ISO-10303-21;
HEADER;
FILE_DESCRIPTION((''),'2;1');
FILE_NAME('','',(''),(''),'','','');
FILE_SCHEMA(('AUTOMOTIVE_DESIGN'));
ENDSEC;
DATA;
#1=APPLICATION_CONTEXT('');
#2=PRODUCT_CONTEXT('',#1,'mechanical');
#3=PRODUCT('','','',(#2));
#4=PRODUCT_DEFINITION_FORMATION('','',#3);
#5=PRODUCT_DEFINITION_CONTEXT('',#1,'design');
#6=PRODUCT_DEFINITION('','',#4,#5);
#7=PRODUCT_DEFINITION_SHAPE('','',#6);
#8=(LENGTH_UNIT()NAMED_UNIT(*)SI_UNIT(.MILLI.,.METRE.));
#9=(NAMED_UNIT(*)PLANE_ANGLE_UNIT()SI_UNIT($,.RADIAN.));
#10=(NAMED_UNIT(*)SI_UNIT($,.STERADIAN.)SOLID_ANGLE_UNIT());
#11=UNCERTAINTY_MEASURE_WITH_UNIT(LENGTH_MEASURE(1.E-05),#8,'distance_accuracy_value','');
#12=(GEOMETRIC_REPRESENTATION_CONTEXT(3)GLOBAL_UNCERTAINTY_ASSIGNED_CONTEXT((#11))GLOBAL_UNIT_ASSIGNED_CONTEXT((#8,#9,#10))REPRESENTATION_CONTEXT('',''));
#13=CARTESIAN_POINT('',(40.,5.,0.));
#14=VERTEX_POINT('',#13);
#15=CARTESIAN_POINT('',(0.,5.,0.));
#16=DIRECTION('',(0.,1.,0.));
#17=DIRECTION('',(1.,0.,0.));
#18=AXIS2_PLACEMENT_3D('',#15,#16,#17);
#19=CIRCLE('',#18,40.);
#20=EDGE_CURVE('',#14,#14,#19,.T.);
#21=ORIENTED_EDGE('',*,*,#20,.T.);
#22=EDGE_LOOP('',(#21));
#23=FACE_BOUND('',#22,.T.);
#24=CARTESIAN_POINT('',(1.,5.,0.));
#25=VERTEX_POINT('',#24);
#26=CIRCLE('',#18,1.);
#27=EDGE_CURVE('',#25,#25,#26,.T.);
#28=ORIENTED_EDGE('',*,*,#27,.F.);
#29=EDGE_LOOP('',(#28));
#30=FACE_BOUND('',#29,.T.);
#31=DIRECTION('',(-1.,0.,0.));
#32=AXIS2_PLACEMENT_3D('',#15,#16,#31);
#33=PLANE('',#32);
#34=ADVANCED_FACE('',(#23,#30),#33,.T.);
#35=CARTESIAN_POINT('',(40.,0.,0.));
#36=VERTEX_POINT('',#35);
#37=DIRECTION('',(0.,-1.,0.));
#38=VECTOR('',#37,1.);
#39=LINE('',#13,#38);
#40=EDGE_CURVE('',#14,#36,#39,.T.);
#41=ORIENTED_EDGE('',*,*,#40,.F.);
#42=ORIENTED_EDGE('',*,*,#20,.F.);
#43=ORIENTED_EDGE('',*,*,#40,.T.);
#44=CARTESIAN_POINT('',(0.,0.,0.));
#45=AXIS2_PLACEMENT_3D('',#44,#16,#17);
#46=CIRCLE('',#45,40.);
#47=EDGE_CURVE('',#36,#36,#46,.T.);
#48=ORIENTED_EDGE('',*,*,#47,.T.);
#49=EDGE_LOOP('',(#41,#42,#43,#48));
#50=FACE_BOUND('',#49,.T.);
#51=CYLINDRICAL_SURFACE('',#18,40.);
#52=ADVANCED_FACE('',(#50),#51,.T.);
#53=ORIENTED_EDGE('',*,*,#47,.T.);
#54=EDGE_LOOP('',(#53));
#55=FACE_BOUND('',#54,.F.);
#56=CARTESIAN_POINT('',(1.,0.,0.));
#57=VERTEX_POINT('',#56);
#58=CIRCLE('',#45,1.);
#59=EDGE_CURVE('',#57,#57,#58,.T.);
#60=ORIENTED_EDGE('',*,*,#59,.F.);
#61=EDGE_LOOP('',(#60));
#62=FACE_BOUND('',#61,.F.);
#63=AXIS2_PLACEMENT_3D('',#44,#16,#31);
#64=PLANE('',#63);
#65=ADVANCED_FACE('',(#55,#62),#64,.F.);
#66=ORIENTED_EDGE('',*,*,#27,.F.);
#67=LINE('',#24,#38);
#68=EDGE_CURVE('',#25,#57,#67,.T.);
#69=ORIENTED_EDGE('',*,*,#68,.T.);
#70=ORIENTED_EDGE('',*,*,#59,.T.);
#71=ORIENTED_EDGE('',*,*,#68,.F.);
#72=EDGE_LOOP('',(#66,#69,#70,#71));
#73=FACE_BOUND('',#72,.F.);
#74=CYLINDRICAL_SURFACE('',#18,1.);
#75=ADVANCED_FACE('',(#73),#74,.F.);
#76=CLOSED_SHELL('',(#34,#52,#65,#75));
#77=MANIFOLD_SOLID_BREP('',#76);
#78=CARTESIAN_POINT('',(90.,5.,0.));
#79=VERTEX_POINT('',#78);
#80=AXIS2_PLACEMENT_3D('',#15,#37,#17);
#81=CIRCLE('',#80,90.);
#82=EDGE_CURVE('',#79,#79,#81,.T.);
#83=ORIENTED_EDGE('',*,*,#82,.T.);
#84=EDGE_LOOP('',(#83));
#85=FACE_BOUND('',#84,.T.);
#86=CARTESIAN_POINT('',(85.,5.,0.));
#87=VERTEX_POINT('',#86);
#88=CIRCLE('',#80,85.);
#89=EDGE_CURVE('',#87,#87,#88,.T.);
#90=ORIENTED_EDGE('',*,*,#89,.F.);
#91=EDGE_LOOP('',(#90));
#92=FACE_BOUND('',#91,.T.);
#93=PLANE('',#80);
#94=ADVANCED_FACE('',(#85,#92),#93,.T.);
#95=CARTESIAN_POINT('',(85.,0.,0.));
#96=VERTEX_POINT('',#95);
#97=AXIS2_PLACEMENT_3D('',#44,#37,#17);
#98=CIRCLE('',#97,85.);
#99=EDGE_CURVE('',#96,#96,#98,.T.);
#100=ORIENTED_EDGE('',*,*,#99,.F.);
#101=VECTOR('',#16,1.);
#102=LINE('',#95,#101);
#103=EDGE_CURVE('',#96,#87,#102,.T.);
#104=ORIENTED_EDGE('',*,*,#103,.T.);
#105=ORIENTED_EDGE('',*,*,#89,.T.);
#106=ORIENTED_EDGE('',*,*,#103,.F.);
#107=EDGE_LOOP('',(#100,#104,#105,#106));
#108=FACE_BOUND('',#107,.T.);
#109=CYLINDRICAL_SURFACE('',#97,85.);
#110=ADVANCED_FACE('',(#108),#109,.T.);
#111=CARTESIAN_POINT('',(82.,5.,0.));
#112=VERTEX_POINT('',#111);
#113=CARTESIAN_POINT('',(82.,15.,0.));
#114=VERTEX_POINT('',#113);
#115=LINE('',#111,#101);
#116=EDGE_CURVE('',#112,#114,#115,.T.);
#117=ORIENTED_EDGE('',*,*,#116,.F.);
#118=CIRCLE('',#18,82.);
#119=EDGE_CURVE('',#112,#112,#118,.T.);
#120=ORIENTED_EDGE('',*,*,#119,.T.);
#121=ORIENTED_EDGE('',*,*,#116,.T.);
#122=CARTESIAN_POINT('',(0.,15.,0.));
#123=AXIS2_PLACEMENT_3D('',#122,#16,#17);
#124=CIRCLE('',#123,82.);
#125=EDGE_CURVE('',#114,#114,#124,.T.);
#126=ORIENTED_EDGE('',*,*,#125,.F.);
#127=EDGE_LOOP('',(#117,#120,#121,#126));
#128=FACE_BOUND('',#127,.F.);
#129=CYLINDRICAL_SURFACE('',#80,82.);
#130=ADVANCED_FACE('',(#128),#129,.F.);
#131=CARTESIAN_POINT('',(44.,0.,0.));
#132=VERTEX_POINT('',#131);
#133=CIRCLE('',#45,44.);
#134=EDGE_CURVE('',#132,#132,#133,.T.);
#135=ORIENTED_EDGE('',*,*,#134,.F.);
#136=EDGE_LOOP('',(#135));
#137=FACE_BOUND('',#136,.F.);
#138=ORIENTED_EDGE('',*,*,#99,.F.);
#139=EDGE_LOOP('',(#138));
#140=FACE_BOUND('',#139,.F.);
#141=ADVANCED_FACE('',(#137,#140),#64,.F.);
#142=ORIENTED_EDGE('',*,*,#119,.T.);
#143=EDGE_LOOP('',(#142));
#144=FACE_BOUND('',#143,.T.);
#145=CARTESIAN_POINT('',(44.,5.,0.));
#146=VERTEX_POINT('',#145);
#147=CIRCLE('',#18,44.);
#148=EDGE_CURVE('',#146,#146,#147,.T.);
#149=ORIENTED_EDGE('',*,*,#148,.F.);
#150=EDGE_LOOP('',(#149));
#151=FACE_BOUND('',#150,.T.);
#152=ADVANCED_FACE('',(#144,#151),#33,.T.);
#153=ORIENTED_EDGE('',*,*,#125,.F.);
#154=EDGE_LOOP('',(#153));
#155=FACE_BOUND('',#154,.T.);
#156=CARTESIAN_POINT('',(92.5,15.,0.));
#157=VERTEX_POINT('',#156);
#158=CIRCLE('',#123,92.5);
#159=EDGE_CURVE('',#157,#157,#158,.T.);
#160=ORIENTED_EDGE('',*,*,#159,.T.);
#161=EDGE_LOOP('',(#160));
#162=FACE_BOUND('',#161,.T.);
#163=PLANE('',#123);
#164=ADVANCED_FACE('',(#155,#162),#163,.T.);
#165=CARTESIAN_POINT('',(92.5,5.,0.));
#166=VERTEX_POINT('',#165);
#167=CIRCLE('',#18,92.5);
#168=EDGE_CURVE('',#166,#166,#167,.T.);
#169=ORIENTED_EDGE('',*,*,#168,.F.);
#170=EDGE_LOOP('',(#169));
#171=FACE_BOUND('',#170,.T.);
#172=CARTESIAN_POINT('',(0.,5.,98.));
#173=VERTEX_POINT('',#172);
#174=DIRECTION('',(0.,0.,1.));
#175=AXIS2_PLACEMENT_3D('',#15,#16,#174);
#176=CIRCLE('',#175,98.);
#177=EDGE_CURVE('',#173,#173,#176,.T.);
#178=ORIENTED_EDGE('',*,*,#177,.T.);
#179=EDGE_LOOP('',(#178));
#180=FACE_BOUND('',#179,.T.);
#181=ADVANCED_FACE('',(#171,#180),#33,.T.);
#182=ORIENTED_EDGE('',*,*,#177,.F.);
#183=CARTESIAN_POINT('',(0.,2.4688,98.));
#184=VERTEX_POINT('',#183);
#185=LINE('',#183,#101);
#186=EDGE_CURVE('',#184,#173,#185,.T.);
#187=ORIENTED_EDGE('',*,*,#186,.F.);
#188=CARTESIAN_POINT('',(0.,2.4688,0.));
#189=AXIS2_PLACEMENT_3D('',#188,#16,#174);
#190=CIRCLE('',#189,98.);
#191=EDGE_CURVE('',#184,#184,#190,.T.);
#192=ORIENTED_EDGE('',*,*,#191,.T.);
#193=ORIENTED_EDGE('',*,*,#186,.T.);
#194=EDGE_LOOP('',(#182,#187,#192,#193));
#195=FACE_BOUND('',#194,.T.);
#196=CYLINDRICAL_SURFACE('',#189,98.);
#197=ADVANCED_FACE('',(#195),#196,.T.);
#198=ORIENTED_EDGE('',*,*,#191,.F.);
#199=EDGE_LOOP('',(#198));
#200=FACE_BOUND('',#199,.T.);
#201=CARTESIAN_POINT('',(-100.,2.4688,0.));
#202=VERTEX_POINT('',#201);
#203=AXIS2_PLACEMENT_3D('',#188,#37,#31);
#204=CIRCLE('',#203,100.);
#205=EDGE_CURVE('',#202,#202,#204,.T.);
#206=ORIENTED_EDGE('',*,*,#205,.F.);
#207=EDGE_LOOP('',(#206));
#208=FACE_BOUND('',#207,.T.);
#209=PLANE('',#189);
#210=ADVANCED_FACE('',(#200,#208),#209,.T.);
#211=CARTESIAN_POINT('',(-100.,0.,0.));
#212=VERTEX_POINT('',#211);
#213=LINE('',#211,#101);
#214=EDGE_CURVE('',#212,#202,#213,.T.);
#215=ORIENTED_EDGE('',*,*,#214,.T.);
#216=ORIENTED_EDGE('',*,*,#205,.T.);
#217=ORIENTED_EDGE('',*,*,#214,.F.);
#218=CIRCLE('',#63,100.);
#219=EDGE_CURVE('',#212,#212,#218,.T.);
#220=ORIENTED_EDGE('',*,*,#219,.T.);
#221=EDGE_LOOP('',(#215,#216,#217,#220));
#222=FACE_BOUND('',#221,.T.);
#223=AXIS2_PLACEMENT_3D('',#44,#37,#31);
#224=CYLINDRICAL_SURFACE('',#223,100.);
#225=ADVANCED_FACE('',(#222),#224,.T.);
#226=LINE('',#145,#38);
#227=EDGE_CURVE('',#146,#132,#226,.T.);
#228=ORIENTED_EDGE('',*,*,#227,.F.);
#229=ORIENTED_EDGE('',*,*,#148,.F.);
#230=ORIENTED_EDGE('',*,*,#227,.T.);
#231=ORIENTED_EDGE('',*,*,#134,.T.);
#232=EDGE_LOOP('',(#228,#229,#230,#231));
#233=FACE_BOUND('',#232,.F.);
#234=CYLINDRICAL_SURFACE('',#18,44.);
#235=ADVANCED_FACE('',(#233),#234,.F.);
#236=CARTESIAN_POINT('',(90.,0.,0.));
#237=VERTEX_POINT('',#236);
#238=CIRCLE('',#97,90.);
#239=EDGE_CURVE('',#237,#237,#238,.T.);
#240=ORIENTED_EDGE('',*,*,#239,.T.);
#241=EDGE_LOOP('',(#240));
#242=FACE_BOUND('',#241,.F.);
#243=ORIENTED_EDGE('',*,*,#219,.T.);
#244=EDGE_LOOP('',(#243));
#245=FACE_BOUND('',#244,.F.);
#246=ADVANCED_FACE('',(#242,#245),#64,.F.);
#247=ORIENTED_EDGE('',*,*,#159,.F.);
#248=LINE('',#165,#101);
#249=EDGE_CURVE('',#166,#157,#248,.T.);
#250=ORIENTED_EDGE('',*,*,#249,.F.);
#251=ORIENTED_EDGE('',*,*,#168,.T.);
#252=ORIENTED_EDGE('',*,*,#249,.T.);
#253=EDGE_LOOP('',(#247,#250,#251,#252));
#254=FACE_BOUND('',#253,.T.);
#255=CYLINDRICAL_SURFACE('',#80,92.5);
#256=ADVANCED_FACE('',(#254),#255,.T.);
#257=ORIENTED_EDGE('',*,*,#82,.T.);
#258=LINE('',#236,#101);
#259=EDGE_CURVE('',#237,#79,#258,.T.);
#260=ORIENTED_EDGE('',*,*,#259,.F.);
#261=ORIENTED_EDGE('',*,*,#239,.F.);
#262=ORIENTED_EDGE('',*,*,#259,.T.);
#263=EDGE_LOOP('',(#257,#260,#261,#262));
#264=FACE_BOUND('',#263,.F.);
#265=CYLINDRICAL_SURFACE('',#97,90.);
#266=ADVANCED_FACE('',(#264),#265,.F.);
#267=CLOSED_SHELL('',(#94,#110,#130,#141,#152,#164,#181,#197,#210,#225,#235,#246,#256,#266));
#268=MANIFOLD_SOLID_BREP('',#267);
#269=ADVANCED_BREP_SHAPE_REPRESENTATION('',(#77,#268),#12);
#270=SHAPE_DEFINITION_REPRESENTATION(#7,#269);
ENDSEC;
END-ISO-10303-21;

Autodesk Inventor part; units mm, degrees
ref_plane "YZ Plane" through (0, 0, 0) normal (1, 0, 0) x (0, 1, 0)
ref_plane "XZ Plane" through (0, 0, 0) normal (0, 1, 0) x (-1, 0, 0)
ref_plane "XY Plane" through (0, 0, 0) normal (0, 0, 1) x (1, 0, 0)
sketch "Sketch1" plane through (0, 0, 0) normal (0, 1, 0) x (-1, 0, 0)
  circle A0 centre (0, 0) radius 100
  dimension "d0" = 200
extrude "Extrusion1" add sketch "Sketch1" along normal blind 5
sketch "Sketch8" plane through (0, 5, 0) normal (0, 1, 0) x (1, 0, 0)
  circle A0 centre (0, 0) radius 1
  circle A1 centre (42, 0) radius 1
  circle A2 centre (-21, 36.3731) radius 1
  circle A3 centre (-21, -36.3731) radius 1
  circle A4 centre (0, 0) radius 44
  circle A5 centre (0, 0) radius 40
  point P0 (-20.5, -35.507)
  point P1 (-20.5, 35.507)
  point P2 (-21.5, 37.2391)
  point P3 (-21.5, -37.2391)
  point P4 (41, 0)
  point P5 (43, 0)
  dimension "d17" = 2
  dimension "d18" = 2
  dimension "d19" = 42
  dimension "d22" = 360
  dimension "d46" = 88
  dimension "d47" = 80
sketch "Sketch9" plane through (0, 5, 0) normal (0, 1, 0) x (1, 0, 0)
  line L0 (80.8862, 2.8807) -> (72.2256, 0)
  line L1 (72.2256, 0) -> (80.8409, -3.9526)
  line L2 (80.3024, 10.1197) -> (71.9349, 6.4743)
  line L3 (71.9349, 6.4743) -> (80.8698, 3.3098)
  line L4 (79.072, 17.2772) -> (71.0649, 12.8964)
  line L5 (71.0649, 12.8964) -> (80.2475, 10.5456)
  line L6 (77.2049, 24.2956) -> (69.6228, 19.2147)
  line L7 (69.6228, 19.2147) -> (78.9792, 17.6965)
  line L8 (74.7163, 31.1184) -> (67.6202, 25.3783)
  line L9 (67.6202, 25.3783) -> (77.0749, 24.7049)
  line L10 (71.6261, 37.6906) -> (65.0731, 31.3375)
  line L11 (65.0731, 31.3375) -> (74.5501, 31.5144)
  line L12 (67.9592, 43.9594) -> (62.002, 37.0445)
  line L13 (62.002, 37.0445) -> (71.4251, 38.0702)
  line L14 (63.7451, 49.8742) -> (58.4318, 42.4532)
  line L15 (58.4318, 42.4532) -> (67.725, 44.3194)
  line L16 (59.0178, 55.3875) -> (54.3911, 47.52)
  line L17 (54.3911, 47.52) -> (63.4796, 50.2118)
  line L18 (53.8153, 60.4549) -> (49.9124, 52.2043)
  line L19 (49.9124, 52.2043) -> (58.7231, 55.6999)
  line L20 (48.1795, 65.0355) -> (45.032, 56.4683)
  line L21 (45.032, 56.4683) -> (53.4938, 60.7396)
  line L22 (42.1558, 69.0924) -> (39.7889, 60.2776)
  line L23 (39.7889, 60.2776) -> (47.8338, 65.2902)
  line L24 (35.7927, 72.5931) -> (34.2255, 63.6016)
  line L25 (34.2255, 63.6016) -> (41.7886, 69.3151)
  line L26 (29.1415, 75.5093) -> (28.3865, 66.4135)
  line L27 (28.3865, 66.4135) -> (35.407, 72.782)
  line L28 (22.2555, 77.8175) -> (22.319, 68.6907)
  line L29 (22.319, 68.6907) -> (28.7404, 75.6629)
  line L30 (15.1904, 79.4992) -> (16.0717, 70.4148)
  line L31 (16.0717, 70.4148) -> (21.8423, 77.9345)
  line L32 (8.003, 80.5409) -> (9.6951, 71.572)
  line L33 (9.6951, 71.572) -> (14.7684, 79.5787)
  line L34 (0.7512, 80.934) -> (3.2404, 72.1529)
  line L35 (3.2404, 72.1529) -> (7.5755, 80.5822)
  line L36 (-6.5067, 80.6755) -> (-3.2404, 72.1529)
  line L37 (-3.2404, 72.1529) -> (0.3217, 80.9369)
  line L38 (-13.7122, 79.7675) -> (-9.6951, 71.572)
  line L39 (-9.6951, 71.572) -> (-6.9347, 80.6399)
  line L40 (-20.8073, 78.2172) -> (-16.0717, 70.4148)
  line L41 (-16.0717, 70.4148) -> (-14.1353, 79.6936)
  line L42 (-27.7349, 76.0372) -> (-22.319, 68.6907)
  line L43 (-22.319, 68.6907) -> (-21.2221, 78.1057)
  line L44 (-34.4392, 73.245) -> (-28.3865, 66.4135)
  line L45 (-28.3865, 66.4135) -> (-28.138, 75.8889)
  line L46 (-40.8661, 69.863) -> (-34.2255, 63.6016)
  line L47 (-34.2255, 63.6016) -> (-34.8273, 73.0612)
  line L48 (-46.9641, 65.9185) -> (-39.7889, 60.2776)
  line L49 (-39.7889, 60.2776) -> (-41.2363, 69.6452)
  line L50 (-52.6839, 61.4433) -> (-45.032, 56.4683)
  line L51 (-45.032, 56.4683) -> (-47.3132, 65.6684)
  line L52 (-57.9796, 56.4734) -> (-49.9124, 52.2043)
  line L53 (-49.9124, 52.2043) -> (-53.0092, 61.1629)
  line L54 (-62.8084, 51.0488) -> (-54.3911, 47.52)
  line L55 (-54.3911, 47.52) -> (-58.2784, 56.165)
  line L56 (-67.1315, 45.2132) -> (-58.4318, 42.4532)
  line L57 (-58.4318, 42.4532) -> (-63.0784, 50.7148)
  line L58 (-70.9142, 39.0136) -> (-62.002, 37.0445)
  line L59 (-62.002, 37.0445) -> (-67.3705, 44.8564)
  line L60 (-74.1258, 32.4998) -> (-65.0731, 31.3375)
  line L61 (-65.0731, 31.3375) -> (-71.1202, 38.6367)
  line L62 (-76.7407, 25.7244) -> (-67.6202, 25.3783)
  line L63 (-67.6202, 25.3783) -> (-74.2973, 32.106)
  line L64 (-78.7377, 18.7419) -> (-69.6228, 19.2147)
  line L65 (-69.6228, 19.2147) -> (-76.8761, 25.3168)
  line L66 (-80.1007, 11.6084) -> (-71.0649, 12.8964)
  line L67 (-71.0649, 12.8964) -> (-78.836, 18.3238)
  line L68 (-80.8188, 4.3815) -> (-71.9349, 6.4743)
  line L69 (-71.9349, 6.4743) -> (-80.1612, 11.1832)
  line L70 (-80.8862, -2.8807) -> (-72.2256, 0)
  line L71 (-72.2256, 0) -> (-80.8409, 3.9526)
  line L72 (-80.3024, -10.1197) -> (-71.9349, -6.4743)
  line L73 (-71.9349, -6.4743) -> (-80.8698, -3.3098)
  line L74 (-79.072, -17.2772) -> (-71.0649, -12.8964)
  line L75 (-71.0649, -12.8964) -> (-80.2475, -10.5456)
  line L76 (-77.2049, -24.2956) -> (-69.6228, -19.2147)
  line L77 (-69.6228, -19.2147) -> (-78.9792, -17.6965)
  line L78 (-74.7163, -31.1184) -> (-67.6202, -25.3783)
  line L79 (-67.6202, -25.3783) -> (-77.0749, -24.7049)
  line L80 (-71.6261, -37.6906) -> (-65.0731, -31.3375)
  line L81 (-65.0731, -31.3375) -> (-74.5501, -31.5144)
  line L82 (-67.9592, -43.9594) -> (-62.002, -37.0445)
  line L83 (-62.002, -37.0445) -> (-71.4251, -38.0702)
  line L84 (-63.7451, -49.8742) -> (-58.4318, -42.4532)
  line L85 (-58.4318, -42.4532) -> (-67.725, -44.3194)
  line L86 (-59.0178, -55.3875) -> (-54.3911, -47.52)
  line L87 (-54.3911, -47.52) -> (-63.4796, -50.2118)
  line L88 (-53.8153, -60.4549) -> (-49.9124, -52.2043)
  line L89 (-49.9124, -52.2043) -> (-58.7231, -55.6999)
  line L90 (-48.1795, -65.0355) -> (-45.032, -56.4683)
  line L91 (-45.032, -56.4683) -> (-53.4938, -60.7396)
  line L92 (-42.1558, -69.0924) -> (-39.7889, -60.2776)
  line L93 (-39.7889, -60.2776) -> (-47.8338, -65.2902)
  line L94 (-35.7927, -72.5931) -> (-34.2255, -63.6016)
  line L95 (-34.2255, -63.6016) -> (-41.7886, -69.3151)
  line L96 (-29.1415, -75.5093) -> (-28.3865, -66.4135)
  line L97 (-28.3865, -66.4135) -> (-35.407, -72.782)
  line L98 (-22.2555, -77.8175) -> (-22.319, -68.6907)
  line L99 (-22.319, -68.6907) -> (-28.7404, -75.6629)
  line L100 (-15.1904, -79.4992) -> (-16.0717, -70.4148)
  line L101 (-16.0717, -70.4148) -> (-21.8423, -77.9345)
  line L102 (-8.003, -80.5409) -> (-9.6951, -71.572)
  line L103 (-9.6951, -71.572) -> (-14.7684, -79.5787)
  line L104 (-0.7512, -80.934) -> (-3.2404, -72.1529)
  line L105 (-3.2404, -72.1529) -> (-7.5755, -80.5822)
  line L106 (6.5067, -80.6755) -> (3.2404, -72.1529)
  line L107 (3.2404, -72.1529) -> (-0.3217, -80.9369)
  line L108 (13.7122, -79.7675) -> (9.6951, -71.572)
  line L109 (9.6951, -71.572) -> (6.9347, -80.6399)
  line L110 (20.8073, -78.2172) -> (16.0717, -70.4148)
  line L111 (16.0717, -70.4148) -> (14.1353, -79.6936)
  line L112 (27.7349, -76.0372) -> (22.319, -68.6907)
  line L113 (22.319, -68.6907) -> (21.2221, -78.1057)
  line L114 (34.4392, -73.245) -> (28.3865, -66.4135)
  line L115 (28.3865, -66.4135) -> (28.138, -75.8889)
  line L116 (40.8661, -69.863) -> (34.2255, -63.6016)
  line L117 (34.2255, -63.6016) -> (34.8273, -73.0612)
  line L118 (46.9641, -65.9185) -> (39.7889, -60.2776)
  line L119 (39.7889, -60.2776) -> (41.2363, -69.6452)
  line L120 (52.6839, -61.4433) -> (45.032, -56.4683)
  line L121 (45.032, -56.4683) -> (47.3132, -65.6684)
  line L122 (57.9796, -56.4734) -> (49.9124, -52.2043)
  line L123 (49.9124, -52.2043) -> (53.0092, -61.1629)
  line L124 (62.8084, -51.0488) -> (54.3911, -47.52)
  line L125 (54.3911, -47.52) -> (58.2784, -56.165)
  line L126 (67.1315, -45.2132) -> (58.4318, -42.4532)
  line L127 (58.4318, -42.4532) -> (63.0784, -50.7148)
  line L128 (70.9142, -39.0136) -> (62.002, -37.0445)
  line L129 (62.002, -37.0445) -> (67.3705, -44.8564)
  line L130 (74.1258, -32.4998) -> (65.0731, -31.3375)
  line L131 (65.0731, -31.3375) -> (71.1202, -38.6367)
  line L132 (76.7407, -25.7244) -> (67.6202, -25.3783)
  line L133 (67.6202, -25.3783) -> (74.2973, -32.106)
  line L134 (78.7377, -18.7419) -> (69.6228, -19.2147)
  line L135 (69.6228, -19.2147) -> (76.8761, -25.3168)
  line L136 (80.1007, -11.6084) -> (71.0649, -12.8964)
  line L137 (71.0649, -12.8964) -> (78.836, -18.3238)
  line L138 (80.8188, -4.3815) -> (71.9349, -6.4743)
  line L139 (71.9349, -6.4743) -> (80.1612, -11.1832)
  circle A0 centre (0, 0) radius 92.5
  arc A1 (-20.8073, 78.2172) -> (-21.2221, 78.1057) centre (0, 0) ccw
  arc A2 (-27.7349, 76.0372) -> (-28.138, 75.8889) centre (0, 0) ccw
  arc A3 (-34.4392, 73.245) -> (-34.8273, 73.0612) centre (0, 0) ccw
  arc A4 (-40.8661, 69.863) -> (-41.2363, 69.6452) centre (0, 0) ccw
  arc A5 (-67.9592, -43.9594) -> (-67.725, -44.3194) centre (0, 0) ccw
  arc A6 (-48.1795, -65.0355) -> (-47.8338, -65.2902) centre (0, 0) ccw
  arc A7 (-42.1558, -69.0924) -> (-41.7886, -69.3151) centre (0, 0) ccw
  arc A8 (-35.7927, -72.5931) -> (-35.407, -72.782) centre (0, 0) ccw
  arc A9 (-29.1415, -75.5093) -> (-28.7404, -75.6629) centre (0, 0) ccw
  arc A10 (-22.2555, -77.8175) -> (-21.8423, -77.9345) centre (0, 0) ccw
  arc A11 (-15.1904, -79.4992) -> (-14.7684, -79.5787) centre (0, 0) ccw
  arc A12 (-8.003, -80.5409) -> (-7.5755, -80.5822) centre (0, 0) ccw
  arc A13 (-0.7512, -80.934) -> (-0.3217, -80.9369) centre (0, 0) ccw
  arc A14 (6.5067, -80.6755) -> (6.9347, -80.6399) centre (0, 0) ccw
  arc A15 (13.7122, -79.7675) -> (14.1353, -79.6936) centre (0, 0) ccw
  arc A16 (20.8073, -78.2172) -> (21.2221, -78.1057) centre (0, 0) ccw
  arc A17 (27.7349, -76.0372) -> (28.138, -75.8889) centre (0, 0) ccw
  arc A18 (34.4392, -73.245) -> (34.8273, -73.0612) centre (0, 0) ccw
  arc A19 (40.8661, -69.863) -> (41.2363, -69.6452) centre (0, 0) ccw
  arc A20 (46.9641, -65.9185) -> (47.3132, -65.6684) centre (0, 0) ccw
  arc A21 (57.9796, -56.4734) -> (58.2784, -56.165) centre (0, 0) ccw
  arc A22 (62.8084, -51.0488) -> (63.0784, -50.7148) centre (0, 0) ccw
  arc A23 (67.1315, -45.2132) -> (67.3705, -44.8564) centre (0, 0) ccw
  arc A24 (70.9142, -39.0136) -> (71.1202, -38.6367) centre (0, 0) ccw
  arc A25 (74.1258, -32.4998) -> (74.2973, -32.106) centre (0, 0) ccw
  arc A26 (76.7407, -25.7244) -> (76.8761, -25.3168) centre (0, 0) ccw
  arc A27 (78.7377, -18.7419) -> (78.836, -18.3238) centre (0, 0) ccw
  arc A28 (80.1007, -11.6084) -> (80.1612, -11.1832) centre (0, 0) ccw
  arc A29 (80.8188, -4.3815) -> (80.8409, -3.9526) centre (0, 0) ccw
  arc A30 (80.8862, 2.8807) -> (80.8698, 3.3098) centre (0, 0) ccw
  arc A31 (80.3024, 10.1197) -> (80.2475, 10.5456) centre (0, 0) ccw
  arc A32 (79.072, 17.2772) -> (78.9792, 17.6965) centre (0, 0) ccw
  arc A33 (77.2049, 24.2956) -> (77.0749, 24.7049) centre (0, 0) ccw
  arc A34 (74.7163, 31.1184) -> (74.5501, 31.5144) centre (0, 0) ccw
  arc A35 (71.6261, 37.6906) -> (71.4251, 38.0702) centre (0, 0) ccw
  arc A36 (67.9592, 43.9594) -> (67.725, 44.3194) centre (0, 0) ccw
  arc A37 (63.7451, 49.8742) -> (63.4796, 50.2118) centre (0, 0) ccw
  arc A38 (59.0178, 55.3875) -> (58.7231, 55.6999) centre (0, 0) ccw
  arc A39 (42.1558, 69.0924) -> (41.7886, 69.3151) centre (0, 0) ccw
  arc A40 (35.7927, 72.5931) -> (35.407, 72.782) centre (0, 0) ccw
  arc A41 (29.1415, 75.5093) -> (28.7404, 75.6629) centre (0, 0) ccw
  arc A42 (22.2555, 77.8175) -> (21.8423, 77.9345) centre (0, 0) ccw
  arc A43 (15.1904, 79.4992) -> (14.7684, 79.5787) centre (0, 0) ccw
  arc A44 (8.003, 80.5409) -> (7.5755, 80.5822) centre (0, 0) ccw
  arc A45 (0.7512, 80.934) -> (0.3217, 80.9369) centre (0, 0) ccw
  arc A46 (-6.5067, 80.6755) -> (-6.9347, 80.6399) centre (0, 0) ccw
  arc A47 (-13.7122, 79.7675) -> (-14.1353, 79.6936) centre (0, 0) ccw
  circle A48 centre (0, 0) radius 82
  dimension "d29" = 360
  dimension "d31" = 185
  dimension "d37" = 164
extrude "Extrusion4" add sketch "Sketch9" along normal blind 10
sketch "Sketch10" plane through (0, 0, 0) normal (1, 0, 0) x (0, 1, 0)
  line L0 (0, 100) -> (5, 100) projected
  line L1 (12.4688, 100) -> (2.4688, 100)
  line L2 (2.4688, 100) -> (2.4688, 98)
  line L3 (2.4688, 98) -> (12.4688, 98)
  line L4 (12.4688, 98) -> (12.4688, 100)
  line L5 (-2.4938, 0) -> (14.9625, 0) projected
  point P0 (0, 0)
  dimension "d34" = 2
  dimension "d35" = 10
revolve "Revolution2" cut sketch "Sketch10" angle 360 about axis through (0, -10, 0) along (0, 1, 0)
extrude "Extrusion5" cut sketch "Sketch8" against normal blind 5 contours A0
sketch "Sketch11" plane through (0, 0, 0) normal (0, -1, 0) x (1, 0, 0)
  circle A0 centre (0, 0) radius 90
  circle A1 centre (0, 0) radius 1 projected
  circle A2 centre (0, 0) radius 85
  dimension "d40" = 180
  dimension "d41" = 170
extrude "Extrusion6" cut sketch "Sketch11" against normal blind 5 contours A0
extrude "Extrusion7" cut sketch "Sketch8" against normal blind 10 contours A1 | A2 | A3
extrude "Extrusion8" cut sketch "Sketch8" against normal blind 10 contours A1 | A2 | A3 | A4
properties part number "PlanetarygearboxBase"
